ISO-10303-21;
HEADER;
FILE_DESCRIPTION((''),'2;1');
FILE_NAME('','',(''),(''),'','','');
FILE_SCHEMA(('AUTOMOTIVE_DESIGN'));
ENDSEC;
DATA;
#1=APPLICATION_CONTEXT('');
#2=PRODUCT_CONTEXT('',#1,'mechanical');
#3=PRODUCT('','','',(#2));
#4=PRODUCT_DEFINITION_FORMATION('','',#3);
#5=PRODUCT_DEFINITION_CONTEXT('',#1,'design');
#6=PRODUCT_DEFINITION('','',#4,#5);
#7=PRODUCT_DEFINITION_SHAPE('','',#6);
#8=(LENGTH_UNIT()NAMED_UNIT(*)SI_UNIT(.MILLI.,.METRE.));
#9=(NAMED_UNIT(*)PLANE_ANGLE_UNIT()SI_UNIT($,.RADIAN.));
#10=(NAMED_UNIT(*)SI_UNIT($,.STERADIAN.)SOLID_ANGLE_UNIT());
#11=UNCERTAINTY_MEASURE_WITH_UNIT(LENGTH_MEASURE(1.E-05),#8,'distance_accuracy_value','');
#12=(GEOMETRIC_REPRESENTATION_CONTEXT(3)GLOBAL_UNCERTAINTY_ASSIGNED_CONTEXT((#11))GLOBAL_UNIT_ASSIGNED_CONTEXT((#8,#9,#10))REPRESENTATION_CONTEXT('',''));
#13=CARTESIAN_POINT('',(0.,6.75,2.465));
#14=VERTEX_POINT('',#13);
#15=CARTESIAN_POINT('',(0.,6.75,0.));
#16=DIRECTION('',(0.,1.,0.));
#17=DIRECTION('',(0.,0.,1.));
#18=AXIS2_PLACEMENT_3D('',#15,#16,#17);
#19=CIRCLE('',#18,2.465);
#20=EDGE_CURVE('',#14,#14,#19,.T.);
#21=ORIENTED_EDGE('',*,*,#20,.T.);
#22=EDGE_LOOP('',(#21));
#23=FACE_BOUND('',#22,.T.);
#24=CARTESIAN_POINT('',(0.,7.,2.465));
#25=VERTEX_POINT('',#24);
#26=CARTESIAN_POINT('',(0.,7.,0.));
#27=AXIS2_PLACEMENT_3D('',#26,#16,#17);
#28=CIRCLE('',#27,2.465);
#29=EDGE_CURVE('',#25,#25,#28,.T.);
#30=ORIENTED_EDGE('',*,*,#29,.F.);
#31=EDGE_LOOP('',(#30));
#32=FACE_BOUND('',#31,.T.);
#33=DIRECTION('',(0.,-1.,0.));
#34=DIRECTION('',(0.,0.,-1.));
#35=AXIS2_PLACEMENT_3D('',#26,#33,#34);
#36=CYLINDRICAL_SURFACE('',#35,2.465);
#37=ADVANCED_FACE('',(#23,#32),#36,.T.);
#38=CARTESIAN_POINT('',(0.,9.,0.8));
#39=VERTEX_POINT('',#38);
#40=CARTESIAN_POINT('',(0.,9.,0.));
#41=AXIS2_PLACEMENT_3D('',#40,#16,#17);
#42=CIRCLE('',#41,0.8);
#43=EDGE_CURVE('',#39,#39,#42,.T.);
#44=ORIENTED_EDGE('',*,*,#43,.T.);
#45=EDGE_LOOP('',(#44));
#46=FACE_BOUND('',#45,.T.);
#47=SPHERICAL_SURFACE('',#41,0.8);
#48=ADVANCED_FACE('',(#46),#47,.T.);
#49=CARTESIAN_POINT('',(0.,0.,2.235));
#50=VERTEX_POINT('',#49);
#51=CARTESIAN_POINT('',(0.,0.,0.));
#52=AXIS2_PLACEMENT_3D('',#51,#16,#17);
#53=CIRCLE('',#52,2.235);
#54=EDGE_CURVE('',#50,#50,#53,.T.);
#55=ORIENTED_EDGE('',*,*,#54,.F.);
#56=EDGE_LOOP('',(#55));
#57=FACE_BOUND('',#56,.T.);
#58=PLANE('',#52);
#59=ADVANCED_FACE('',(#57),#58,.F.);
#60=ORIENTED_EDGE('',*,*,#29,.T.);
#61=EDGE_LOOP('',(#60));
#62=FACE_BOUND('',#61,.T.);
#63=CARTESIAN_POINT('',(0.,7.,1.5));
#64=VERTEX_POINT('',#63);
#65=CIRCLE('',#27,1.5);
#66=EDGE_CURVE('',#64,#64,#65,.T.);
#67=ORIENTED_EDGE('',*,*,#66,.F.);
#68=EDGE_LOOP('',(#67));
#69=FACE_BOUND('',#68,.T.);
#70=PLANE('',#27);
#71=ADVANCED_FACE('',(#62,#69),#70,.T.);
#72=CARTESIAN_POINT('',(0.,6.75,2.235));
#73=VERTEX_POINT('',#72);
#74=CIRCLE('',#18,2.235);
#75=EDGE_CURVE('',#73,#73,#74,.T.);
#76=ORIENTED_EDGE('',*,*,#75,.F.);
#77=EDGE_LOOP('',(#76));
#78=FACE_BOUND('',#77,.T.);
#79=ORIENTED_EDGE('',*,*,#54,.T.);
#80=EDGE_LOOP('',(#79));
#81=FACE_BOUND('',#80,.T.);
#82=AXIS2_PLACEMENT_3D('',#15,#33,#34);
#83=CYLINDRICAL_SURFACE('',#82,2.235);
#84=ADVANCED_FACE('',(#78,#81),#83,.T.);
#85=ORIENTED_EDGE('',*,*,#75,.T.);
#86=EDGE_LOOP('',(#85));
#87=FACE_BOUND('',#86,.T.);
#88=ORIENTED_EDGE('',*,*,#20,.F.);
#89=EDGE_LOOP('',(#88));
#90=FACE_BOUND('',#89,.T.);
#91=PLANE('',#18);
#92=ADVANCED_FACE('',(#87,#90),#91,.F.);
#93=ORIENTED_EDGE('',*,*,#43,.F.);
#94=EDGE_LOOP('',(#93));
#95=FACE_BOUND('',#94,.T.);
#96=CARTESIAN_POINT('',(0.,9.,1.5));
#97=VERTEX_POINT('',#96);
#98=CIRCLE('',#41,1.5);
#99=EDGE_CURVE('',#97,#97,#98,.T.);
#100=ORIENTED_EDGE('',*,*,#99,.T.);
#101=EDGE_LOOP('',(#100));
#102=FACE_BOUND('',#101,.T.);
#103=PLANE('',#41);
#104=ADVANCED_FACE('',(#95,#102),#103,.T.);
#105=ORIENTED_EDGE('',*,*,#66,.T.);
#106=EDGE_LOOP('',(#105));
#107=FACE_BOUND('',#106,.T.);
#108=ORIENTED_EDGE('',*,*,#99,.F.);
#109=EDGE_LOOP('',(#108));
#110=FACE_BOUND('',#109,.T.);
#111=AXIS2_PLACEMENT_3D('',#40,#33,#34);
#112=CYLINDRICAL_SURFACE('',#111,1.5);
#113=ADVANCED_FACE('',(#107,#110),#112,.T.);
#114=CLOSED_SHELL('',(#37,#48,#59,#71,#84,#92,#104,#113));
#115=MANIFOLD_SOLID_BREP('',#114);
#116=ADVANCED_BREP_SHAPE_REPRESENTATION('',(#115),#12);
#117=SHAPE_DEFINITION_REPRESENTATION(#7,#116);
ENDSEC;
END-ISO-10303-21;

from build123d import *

# Parameters (mm, degrees)
SKETCH1_R           = 2.235
BOSS_EXTRUDE1_DEPTH = 6.75
SKETCH2_R           = 2.465
BOSS_EXTRUDE2_DEPTH = 0.25
SKETCH4_R           = 1.5
BOSS_EXTRUDE3_DEPTH = 2
SKETCH5_R           = 0.8
BOSS_EXTRUDE4_DEPTH = 0.8
FILLET1_R           = 0.8


with BuildPart() as part:
    # Sketch1 → Boss-Extrude1 (new body)
    with BuildSketch(Plane(origin=(0, 0, 0), x_dir=(1, 0, 0), z_dir=(0, 1, 0))):
        with Locations(Location((0, 0, 0), (0, 0, 270))):
            Circle(SKETCH1_R)
    extrude(amount=BOSS_EXTRUDE1_DEPTH)

    # Sketch2 → Boss-Extrude2 (add)
    with BuildSketch(Plane(origin=(0, 6.75, 0), x_dir=(1, 0, 0), z_dir=(0, 1, 0))):
        with Locations(Location((0, 0, 0), (0, 0, 270))):
            Circle(SKETCH2_R)
    extrude(amount=BOSS_EXTRUDE2_DEPTH)

    # Sketch4 → Boss-Extrude3 (add)
    with BuildSketch(Plane(origin=(0, 7, 0), x_dir=(1, 0, 0), z_dir=(0, 1, 0))):
        with Locations(Location((0, 0, 0), (0, 0, 270))):
            Circle(SKETCH4_R)
    extrude(amount=BOSS_EXTRUDE3_DEPTH)

    # Sketch5 → Boss-Extrude4 (add)
    with BuildSketch(Plane(origin=(0, 9, 0), x_dir=(1, 0, 0), z_dir=(0, 1, 0))):
        with Locations(Location((0, 0, 0), (0, 0, 270))):
            Circle(SKETCH5_R)
    extrude(amount=BOSS_EXTRUDE4_DEPTH)

    # Fillet1
    fillet1_edges = [part.edges().sort_by_distance(p)[0] for p in [
        (0, 9.8, -0.8),
    ]]
    fillet(fillet1_edges, radius=FILLET1_R - 0.0001)  # a hair under: the kernel refuses the full size


solid = part.part
